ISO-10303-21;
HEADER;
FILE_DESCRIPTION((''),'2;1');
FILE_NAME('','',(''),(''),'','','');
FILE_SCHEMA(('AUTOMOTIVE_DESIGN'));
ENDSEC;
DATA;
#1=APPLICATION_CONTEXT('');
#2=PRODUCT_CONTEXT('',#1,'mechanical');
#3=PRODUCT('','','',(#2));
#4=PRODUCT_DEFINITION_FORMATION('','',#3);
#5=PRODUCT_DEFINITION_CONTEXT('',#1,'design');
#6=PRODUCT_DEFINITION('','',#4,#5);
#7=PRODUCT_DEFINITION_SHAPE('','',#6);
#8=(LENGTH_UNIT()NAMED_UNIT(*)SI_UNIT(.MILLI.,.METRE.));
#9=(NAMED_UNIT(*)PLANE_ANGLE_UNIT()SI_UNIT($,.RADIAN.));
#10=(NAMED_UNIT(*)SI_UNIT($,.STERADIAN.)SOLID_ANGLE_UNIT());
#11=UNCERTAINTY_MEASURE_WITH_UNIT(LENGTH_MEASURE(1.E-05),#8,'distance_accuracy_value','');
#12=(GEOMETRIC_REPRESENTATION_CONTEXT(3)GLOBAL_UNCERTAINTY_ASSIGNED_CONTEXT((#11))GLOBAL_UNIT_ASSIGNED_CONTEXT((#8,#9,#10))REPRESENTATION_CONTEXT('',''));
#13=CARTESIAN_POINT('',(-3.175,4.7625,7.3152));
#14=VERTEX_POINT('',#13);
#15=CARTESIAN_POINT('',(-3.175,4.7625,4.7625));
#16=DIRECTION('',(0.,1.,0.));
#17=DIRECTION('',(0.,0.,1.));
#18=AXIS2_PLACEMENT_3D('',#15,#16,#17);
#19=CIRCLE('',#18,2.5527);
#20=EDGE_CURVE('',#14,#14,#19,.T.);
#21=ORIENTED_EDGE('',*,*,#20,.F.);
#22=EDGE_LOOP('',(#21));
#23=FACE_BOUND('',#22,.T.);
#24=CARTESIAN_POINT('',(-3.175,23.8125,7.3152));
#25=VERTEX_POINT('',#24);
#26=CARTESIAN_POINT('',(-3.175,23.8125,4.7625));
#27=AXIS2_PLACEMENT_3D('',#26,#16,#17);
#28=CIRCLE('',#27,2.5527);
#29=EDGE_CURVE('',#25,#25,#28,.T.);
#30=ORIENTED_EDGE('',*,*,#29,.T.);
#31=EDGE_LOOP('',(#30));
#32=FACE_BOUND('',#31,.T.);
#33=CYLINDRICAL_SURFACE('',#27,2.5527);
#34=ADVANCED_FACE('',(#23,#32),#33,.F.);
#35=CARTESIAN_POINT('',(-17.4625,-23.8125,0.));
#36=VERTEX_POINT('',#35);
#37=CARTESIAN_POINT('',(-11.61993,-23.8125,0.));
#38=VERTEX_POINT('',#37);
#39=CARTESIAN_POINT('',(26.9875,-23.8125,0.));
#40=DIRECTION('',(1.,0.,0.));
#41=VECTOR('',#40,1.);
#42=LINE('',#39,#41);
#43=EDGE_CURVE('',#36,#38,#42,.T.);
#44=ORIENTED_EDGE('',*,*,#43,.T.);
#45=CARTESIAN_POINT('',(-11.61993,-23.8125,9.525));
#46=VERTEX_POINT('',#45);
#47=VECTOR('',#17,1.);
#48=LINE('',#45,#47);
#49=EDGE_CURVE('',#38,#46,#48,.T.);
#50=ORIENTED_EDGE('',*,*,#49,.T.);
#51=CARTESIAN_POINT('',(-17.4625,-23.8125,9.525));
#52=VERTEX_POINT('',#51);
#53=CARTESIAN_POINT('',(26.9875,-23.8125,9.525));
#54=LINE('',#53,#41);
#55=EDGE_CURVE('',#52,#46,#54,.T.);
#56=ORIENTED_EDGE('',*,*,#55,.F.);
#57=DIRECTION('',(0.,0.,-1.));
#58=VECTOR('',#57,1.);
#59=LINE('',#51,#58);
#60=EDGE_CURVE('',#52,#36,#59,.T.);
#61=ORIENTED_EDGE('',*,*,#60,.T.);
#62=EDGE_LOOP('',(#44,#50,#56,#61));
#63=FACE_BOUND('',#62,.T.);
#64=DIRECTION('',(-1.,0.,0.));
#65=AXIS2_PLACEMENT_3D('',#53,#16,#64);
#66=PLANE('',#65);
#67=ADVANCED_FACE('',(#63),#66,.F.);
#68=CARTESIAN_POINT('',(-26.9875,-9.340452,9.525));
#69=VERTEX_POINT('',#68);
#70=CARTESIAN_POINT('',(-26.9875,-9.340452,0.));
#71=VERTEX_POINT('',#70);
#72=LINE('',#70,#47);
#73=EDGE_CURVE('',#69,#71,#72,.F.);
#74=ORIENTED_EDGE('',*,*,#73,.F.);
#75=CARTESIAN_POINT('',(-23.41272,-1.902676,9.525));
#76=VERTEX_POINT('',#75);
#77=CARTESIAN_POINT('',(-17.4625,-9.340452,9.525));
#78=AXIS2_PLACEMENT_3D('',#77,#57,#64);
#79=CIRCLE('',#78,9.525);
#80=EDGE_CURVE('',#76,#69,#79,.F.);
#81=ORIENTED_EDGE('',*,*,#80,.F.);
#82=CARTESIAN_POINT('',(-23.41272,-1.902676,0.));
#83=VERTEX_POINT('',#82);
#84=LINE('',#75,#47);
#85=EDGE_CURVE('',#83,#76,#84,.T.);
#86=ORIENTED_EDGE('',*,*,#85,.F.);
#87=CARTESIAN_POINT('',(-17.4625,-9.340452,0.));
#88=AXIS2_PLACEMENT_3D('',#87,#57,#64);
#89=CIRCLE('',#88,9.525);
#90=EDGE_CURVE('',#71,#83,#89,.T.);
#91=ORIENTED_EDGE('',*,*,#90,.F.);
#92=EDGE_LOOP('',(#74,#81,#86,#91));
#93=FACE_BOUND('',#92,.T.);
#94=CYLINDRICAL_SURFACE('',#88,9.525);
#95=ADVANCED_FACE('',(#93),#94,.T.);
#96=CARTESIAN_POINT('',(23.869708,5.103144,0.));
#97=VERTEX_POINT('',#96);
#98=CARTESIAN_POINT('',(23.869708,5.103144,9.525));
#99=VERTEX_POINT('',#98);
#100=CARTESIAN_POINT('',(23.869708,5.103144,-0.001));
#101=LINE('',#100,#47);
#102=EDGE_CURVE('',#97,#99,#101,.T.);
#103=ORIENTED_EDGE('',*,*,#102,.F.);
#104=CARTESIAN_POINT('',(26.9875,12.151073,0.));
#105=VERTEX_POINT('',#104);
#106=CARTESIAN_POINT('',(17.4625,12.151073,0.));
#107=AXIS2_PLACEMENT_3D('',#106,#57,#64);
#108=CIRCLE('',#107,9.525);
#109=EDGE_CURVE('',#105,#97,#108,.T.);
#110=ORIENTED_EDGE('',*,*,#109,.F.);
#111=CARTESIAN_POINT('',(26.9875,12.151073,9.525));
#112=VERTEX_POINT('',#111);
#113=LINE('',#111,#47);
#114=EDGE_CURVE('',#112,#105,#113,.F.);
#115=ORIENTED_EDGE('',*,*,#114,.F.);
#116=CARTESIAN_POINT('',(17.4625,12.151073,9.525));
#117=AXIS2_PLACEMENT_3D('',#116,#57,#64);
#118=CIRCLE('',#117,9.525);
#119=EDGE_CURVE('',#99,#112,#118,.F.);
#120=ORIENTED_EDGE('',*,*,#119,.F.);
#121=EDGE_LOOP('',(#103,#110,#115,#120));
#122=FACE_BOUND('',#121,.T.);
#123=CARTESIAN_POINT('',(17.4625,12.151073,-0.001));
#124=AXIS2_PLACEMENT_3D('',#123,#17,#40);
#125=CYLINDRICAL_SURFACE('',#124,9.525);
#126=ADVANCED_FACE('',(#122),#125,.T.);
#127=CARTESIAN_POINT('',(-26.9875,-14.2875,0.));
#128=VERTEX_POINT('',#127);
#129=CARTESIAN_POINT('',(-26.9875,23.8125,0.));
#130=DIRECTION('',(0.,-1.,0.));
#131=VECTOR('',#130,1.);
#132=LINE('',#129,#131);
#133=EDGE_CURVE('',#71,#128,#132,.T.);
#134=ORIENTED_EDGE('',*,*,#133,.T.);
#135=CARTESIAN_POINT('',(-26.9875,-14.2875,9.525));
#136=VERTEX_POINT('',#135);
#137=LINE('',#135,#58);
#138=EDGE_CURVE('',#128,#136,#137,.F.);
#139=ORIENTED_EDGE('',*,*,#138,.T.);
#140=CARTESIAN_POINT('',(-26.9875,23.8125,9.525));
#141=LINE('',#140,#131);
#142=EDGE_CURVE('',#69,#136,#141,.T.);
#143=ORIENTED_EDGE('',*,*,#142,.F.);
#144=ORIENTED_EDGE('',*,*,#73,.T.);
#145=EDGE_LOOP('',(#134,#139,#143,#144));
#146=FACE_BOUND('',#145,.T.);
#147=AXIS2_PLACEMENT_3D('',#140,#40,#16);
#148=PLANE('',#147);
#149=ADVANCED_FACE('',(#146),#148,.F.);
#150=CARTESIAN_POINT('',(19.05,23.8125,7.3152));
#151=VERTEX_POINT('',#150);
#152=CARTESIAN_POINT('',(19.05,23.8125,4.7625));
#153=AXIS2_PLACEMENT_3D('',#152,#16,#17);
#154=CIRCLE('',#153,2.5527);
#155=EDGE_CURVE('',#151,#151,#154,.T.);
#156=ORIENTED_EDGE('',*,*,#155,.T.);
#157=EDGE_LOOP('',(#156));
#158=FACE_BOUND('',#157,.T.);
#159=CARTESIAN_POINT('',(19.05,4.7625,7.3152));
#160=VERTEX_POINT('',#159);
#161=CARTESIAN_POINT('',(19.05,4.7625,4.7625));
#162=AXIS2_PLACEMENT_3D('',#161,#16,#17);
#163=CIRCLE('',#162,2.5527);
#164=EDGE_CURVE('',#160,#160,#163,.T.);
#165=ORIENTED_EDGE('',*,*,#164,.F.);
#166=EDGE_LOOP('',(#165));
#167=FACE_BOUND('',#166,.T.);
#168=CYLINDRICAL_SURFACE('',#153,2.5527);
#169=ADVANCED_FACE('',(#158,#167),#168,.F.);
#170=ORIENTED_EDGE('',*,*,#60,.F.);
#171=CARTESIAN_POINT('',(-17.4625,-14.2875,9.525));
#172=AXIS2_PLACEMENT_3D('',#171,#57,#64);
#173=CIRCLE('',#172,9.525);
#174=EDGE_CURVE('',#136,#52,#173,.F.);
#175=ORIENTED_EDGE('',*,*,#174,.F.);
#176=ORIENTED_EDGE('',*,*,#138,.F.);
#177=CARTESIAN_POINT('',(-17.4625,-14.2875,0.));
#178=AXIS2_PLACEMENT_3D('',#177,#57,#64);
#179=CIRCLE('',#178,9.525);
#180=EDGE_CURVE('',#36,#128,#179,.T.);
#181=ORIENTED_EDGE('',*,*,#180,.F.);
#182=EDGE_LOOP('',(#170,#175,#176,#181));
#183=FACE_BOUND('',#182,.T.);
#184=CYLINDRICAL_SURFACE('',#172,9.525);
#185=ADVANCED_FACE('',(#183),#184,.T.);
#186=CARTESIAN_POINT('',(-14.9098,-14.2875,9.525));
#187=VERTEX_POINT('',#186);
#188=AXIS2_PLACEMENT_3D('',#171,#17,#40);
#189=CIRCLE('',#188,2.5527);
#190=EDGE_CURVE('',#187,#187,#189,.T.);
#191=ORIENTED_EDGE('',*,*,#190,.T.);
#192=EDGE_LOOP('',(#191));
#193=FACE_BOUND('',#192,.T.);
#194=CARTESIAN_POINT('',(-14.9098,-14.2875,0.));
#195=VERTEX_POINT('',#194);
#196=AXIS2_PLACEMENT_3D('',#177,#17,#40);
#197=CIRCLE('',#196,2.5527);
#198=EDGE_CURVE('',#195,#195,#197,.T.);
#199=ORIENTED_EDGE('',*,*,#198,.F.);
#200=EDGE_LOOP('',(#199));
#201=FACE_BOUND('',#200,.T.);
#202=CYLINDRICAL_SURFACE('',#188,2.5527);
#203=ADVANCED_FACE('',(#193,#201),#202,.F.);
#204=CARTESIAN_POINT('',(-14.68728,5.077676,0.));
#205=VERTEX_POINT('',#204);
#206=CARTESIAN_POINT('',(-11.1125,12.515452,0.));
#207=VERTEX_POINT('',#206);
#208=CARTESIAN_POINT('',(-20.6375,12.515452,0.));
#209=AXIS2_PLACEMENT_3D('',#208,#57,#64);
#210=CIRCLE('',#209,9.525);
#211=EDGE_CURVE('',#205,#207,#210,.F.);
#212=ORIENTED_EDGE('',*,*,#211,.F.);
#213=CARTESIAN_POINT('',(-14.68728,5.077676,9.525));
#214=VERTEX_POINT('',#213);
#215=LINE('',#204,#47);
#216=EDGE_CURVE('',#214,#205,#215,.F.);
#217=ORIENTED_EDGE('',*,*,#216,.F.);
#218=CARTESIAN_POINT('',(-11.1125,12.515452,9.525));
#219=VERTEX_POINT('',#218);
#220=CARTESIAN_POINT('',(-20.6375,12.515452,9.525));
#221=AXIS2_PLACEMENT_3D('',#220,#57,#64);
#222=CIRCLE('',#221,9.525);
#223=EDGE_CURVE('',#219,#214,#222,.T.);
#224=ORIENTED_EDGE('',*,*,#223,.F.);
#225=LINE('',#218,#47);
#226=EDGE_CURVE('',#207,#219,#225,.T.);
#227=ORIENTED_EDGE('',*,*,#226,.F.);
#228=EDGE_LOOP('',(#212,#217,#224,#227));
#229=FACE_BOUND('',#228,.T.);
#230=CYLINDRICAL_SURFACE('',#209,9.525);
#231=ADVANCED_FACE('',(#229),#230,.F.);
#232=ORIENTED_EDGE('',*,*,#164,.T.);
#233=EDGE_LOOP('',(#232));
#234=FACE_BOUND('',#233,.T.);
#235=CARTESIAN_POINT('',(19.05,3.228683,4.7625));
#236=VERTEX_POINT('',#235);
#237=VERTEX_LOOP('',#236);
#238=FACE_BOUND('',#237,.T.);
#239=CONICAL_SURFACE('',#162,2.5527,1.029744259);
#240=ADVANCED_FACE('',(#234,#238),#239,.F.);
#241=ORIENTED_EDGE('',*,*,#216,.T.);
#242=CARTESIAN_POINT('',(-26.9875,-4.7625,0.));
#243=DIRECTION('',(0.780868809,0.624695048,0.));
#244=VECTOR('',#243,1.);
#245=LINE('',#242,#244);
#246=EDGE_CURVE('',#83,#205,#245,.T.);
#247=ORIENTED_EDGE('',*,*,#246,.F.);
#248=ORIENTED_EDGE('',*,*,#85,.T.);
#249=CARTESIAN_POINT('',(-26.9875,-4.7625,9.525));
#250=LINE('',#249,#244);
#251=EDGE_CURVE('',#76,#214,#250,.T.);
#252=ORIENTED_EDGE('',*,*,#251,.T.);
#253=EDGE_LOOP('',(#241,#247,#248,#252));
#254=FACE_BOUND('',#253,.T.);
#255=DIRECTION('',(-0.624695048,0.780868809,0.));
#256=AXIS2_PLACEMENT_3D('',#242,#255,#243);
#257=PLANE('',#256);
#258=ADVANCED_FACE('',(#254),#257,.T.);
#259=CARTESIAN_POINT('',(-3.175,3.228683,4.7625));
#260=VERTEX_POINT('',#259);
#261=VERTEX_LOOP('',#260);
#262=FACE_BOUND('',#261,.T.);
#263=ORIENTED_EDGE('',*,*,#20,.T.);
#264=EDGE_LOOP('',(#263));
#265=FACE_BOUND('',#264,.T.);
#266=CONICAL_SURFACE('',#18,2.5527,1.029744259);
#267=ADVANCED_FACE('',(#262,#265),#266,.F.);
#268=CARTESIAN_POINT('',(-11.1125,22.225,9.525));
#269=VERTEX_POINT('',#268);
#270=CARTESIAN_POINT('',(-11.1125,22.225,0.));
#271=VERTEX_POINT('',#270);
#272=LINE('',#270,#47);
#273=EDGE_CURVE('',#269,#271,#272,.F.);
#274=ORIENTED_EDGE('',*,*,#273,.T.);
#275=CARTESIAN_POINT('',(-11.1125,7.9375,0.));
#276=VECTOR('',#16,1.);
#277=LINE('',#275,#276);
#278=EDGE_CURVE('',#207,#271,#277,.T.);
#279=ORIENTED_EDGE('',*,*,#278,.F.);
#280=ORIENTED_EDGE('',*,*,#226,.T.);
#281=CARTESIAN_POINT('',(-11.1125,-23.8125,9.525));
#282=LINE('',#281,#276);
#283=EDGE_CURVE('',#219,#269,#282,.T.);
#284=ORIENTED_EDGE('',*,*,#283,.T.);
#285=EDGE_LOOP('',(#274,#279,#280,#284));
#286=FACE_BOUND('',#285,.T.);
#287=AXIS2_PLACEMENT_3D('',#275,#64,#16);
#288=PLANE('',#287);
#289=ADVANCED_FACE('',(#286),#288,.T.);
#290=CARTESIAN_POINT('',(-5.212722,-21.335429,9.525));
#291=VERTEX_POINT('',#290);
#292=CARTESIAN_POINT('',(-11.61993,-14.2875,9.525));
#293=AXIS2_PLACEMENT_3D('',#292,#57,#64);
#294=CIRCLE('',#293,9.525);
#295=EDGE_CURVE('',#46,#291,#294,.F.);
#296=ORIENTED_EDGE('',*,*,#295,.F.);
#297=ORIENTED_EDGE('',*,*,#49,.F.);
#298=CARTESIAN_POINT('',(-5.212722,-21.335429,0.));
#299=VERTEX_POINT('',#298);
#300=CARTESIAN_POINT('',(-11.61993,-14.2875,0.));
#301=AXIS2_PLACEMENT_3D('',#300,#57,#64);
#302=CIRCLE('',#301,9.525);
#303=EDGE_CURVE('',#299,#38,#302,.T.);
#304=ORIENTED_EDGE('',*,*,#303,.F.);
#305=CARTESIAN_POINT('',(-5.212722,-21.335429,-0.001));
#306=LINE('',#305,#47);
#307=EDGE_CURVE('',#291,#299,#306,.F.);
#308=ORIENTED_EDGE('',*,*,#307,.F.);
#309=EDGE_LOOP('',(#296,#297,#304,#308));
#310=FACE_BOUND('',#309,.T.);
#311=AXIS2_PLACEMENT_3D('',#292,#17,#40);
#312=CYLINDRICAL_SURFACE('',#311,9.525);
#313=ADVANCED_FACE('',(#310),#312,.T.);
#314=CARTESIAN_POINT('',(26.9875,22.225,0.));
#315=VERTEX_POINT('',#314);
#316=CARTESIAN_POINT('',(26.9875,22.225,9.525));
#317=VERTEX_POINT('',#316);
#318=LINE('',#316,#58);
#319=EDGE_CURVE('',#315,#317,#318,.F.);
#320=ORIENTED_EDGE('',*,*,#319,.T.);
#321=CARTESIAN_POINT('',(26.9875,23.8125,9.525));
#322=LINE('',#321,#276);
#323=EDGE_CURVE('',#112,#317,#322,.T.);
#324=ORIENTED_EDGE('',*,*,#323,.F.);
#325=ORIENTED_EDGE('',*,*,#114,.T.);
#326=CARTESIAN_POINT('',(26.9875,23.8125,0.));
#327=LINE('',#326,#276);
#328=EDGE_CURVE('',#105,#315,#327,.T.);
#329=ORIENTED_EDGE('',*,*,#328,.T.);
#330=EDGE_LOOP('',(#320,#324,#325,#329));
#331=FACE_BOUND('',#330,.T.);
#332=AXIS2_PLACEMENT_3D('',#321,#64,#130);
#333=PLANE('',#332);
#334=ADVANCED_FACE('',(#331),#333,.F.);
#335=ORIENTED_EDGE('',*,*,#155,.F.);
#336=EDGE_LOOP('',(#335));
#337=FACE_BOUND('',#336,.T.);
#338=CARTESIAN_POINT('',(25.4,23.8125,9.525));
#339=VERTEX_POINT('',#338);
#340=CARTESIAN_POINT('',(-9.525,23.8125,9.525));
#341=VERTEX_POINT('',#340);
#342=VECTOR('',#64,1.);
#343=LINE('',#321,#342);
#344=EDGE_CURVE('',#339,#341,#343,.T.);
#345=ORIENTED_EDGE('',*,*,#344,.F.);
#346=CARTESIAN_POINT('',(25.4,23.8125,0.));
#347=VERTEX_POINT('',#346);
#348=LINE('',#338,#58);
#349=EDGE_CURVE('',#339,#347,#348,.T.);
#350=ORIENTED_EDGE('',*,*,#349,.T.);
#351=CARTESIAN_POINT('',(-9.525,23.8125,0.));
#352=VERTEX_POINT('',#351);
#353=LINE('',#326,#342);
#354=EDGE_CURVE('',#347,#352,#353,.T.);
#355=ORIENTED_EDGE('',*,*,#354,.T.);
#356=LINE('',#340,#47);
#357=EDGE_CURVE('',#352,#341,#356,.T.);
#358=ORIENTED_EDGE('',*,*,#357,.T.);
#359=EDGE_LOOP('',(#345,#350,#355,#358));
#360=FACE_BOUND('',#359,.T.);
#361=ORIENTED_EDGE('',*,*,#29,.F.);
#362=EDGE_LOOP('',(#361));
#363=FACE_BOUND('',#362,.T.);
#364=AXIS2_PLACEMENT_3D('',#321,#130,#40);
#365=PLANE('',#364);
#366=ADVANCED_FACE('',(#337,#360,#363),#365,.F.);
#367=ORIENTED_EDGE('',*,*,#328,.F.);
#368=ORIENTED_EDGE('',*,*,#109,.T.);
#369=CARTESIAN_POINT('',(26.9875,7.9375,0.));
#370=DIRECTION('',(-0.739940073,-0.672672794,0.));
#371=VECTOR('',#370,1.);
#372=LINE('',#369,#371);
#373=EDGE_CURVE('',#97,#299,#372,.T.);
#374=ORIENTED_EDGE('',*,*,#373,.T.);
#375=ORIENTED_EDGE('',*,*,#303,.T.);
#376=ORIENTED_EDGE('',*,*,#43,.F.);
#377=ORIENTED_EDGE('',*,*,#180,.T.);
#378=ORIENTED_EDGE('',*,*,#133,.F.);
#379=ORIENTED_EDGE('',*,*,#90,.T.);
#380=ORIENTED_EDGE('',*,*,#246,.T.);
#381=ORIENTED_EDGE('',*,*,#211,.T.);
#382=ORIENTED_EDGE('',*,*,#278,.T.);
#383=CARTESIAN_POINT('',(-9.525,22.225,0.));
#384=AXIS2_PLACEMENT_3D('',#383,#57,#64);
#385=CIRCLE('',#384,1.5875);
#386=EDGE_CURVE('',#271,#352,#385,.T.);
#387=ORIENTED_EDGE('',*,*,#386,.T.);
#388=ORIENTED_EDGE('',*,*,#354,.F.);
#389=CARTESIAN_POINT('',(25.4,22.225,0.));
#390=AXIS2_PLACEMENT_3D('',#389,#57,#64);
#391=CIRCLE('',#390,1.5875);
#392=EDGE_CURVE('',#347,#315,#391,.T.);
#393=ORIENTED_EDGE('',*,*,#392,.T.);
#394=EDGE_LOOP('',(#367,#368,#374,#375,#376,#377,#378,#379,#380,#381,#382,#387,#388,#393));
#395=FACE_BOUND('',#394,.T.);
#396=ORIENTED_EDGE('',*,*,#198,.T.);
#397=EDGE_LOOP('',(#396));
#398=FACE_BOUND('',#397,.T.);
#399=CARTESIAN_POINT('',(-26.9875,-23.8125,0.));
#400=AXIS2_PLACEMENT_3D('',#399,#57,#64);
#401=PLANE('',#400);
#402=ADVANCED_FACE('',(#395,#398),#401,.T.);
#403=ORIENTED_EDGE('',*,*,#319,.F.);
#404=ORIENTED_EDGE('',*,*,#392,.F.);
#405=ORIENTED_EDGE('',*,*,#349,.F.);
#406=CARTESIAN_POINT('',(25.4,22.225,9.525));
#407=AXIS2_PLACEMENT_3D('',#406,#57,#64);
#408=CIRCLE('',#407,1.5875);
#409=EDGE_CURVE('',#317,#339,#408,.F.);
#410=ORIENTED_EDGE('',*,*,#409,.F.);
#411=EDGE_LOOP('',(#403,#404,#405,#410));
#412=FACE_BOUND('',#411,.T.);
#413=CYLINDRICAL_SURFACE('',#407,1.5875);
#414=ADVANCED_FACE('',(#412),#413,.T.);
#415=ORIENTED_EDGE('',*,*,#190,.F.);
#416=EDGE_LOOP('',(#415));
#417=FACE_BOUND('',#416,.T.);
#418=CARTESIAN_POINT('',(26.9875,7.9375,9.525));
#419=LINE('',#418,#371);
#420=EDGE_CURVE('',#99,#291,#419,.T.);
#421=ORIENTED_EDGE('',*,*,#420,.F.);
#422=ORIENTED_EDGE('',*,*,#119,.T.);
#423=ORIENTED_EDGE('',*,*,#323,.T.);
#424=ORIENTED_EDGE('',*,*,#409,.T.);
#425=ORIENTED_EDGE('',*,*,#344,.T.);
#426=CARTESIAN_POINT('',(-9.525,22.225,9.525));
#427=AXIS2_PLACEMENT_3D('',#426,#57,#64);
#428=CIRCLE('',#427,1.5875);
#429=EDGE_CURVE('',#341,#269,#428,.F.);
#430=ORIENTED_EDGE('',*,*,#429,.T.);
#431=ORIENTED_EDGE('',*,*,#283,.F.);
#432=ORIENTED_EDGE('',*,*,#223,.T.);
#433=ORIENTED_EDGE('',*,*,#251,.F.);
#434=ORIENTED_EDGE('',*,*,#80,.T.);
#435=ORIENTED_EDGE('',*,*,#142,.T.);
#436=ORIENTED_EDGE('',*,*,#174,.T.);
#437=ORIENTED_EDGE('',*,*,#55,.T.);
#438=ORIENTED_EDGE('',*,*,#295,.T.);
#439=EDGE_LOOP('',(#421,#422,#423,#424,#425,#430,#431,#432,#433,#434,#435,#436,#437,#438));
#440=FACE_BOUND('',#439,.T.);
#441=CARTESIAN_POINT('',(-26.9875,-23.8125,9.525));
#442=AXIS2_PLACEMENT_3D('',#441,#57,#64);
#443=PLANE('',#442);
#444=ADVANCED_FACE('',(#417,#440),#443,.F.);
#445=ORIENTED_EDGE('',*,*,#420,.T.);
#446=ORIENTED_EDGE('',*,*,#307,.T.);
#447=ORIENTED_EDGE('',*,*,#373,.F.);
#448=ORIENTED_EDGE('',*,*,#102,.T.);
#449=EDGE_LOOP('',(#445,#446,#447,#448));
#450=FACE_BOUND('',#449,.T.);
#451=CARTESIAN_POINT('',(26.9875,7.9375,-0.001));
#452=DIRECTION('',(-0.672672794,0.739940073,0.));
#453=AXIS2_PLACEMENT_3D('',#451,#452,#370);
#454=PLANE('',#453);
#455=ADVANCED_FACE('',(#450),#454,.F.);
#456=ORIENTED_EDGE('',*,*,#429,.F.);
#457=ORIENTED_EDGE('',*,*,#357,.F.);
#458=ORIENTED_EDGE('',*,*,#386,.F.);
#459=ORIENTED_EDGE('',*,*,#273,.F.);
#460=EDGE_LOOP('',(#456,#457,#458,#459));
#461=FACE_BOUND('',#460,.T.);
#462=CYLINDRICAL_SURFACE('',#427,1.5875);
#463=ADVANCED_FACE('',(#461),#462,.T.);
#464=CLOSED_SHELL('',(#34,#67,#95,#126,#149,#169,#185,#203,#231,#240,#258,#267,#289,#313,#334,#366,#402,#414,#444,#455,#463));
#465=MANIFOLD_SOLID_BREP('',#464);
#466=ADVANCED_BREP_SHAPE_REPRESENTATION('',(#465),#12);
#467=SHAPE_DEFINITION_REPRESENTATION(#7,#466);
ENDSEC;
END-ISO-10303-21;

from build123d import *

# Parameters (mm, degrees)
SKETCH1_W                   = 53.975
SKETCH1_H                   = 47.625
BASE_FLANGE1_DEPTH          = 9.525
F_1_4_20_TAPPED_HOLE1_D     = 5.1054
F_1_4_20_TAPPED_HOLE1_DEPTH = 19.05
F_1_4_20_TAPPED_HOLE1_TIP   = 1.533816902
CUT_EXTRUDE1_DEPTH          = 38.230175094
CUT_EXTRUDE2_REACH          = 39.23
F_1_4_20_TAPPED_HOLE2_D     = 5.1054
F_1_4_20_TAPPED_HOLE2_DEPTH = 9.525
CUT_EXTRUDE3_REACH          = 39.23
FILLET2_R                   = 1.5875
FILLET1_R                   = 9.525


# Sheet-metal steps are written as plain solids
with BuildPart() as part:
    # Sketch1 → Base-Flange1 (new body)
    with BuildSketch(Plane.XY):
        Rectangle(SKETCH1_W, SKETCH1_H)
    extrude(amount=BASE_FLANGE1_DEPTH)

    # 1/4-20 Tapped Hole1
    with Locations(Plane(origin=(0, 23.8125, 0), x_dir=(1, 0, 0), z_dir=(0, 1, 0))):
        with Locations((-3.175, -4.7625), (19.05, -4.7625)):
            Hole(F_1_4_20_TAPPED_HOLE1_D / 2, depth=F_1_4_20_TAPPED_HOLE1_DEPTH)
            with Locations((0, 0, -(F_1_4_20_TAPPED_HOLE1_DEPTH + F_1_4_20_TAPPED_HOLE1_TIP / 2))):  # 118° drill point
                Cone(0, F_1_4_20_TAPPED_HOLE1_D / 2, F_1_4_20_TAPPED_HOLE1_TIP, mode=Mode.SUBTRACT)

    # Sketch4 → Cut-Extrude1 (cut, through all)
    with BuildSketch(Plane(origin=(0, 0, 0), x_dir=(-1, 0, 0), z_dir=(0, 0, -1))):
        with BuildLine():
            Line((17.5895, -14.224), (17.5895, -14.351))
            ThreePointArc((17.5895, -14.351), (17.4625, -14.478), (17.3355, -14.351))
            Line((17.3355, -14.351), (17.3355, -14.224))
            ThreePointArc((17.3355, -14.224), (17.4625, -14.097), (17.5895, -14.224))
        make_face()
    extrude(amount=-CUT_EXTRUDE1_DEPTH, mode=Mode.SUBTRACT)

    # Sketch5 → Cut-Extrude2 (cut, up to next)
    with BuildSketch(Plane.XY.offset(9.525), mode=Mode.PRIVATE) as cut_extrude2_sk1:
        Polygon((26.9875, -23.8125), (26.9875, 7.9375), (-7.9375, -23.8125), align=None)
    cut_extrude2_tool1 = extrude(cut_extrude2_sk1.sketch, amount=-CUT_EXTRUDE2_REACH, mode=Mode.PRIVATE) & part.part
    add(cut_extrude2_tool1.solids().sort_by_distance((15.345833, -13.229167, 9.525))[0], mode=Mode.SUBTRACT)

    # 1/4-20 Tapped Hole2
    with Locations(Plane.XY.offset(9.525)):
        with Locations((-17.4625, -14.2875)):
            Hole(F_1_4_20_TAPPED_HOLE2_D / 2, depth=F_1_4_20_TAPPED_HOLE2_DEPTH)

    # Sketch8 → Cut-Extrude3 (cut, up to next)
    with BuildSketch(Plane.XY.offset(9.525), mode=Mode.PRIVATE) as cut_extrude3_sk1:
        Polygon((-26.9875, -4.7625), (-11.1125, 7.9375), (-11.1125, 23.8125), (-26.9875, 23.8125), align=None)
    cut_extrude3_tool1 = extrude(cut_extrude3_sk1.sketch, amount=-CUT_EXTRUDE3_REACH, mode=Mode.PRIVATE) & part.part
    add(cut_extrude3_tool1.solids().sort_by_distance((-19.805952, 12.397619, 9.525))[0], mode=Mode.SUBTRACT)

    # Fillet2
    fillet2_edges = [part.edges().sort_by_distance(p)[0] for p in [
        (-11.1125, 23.8125, 4.7625),
        (26.9875, 23.8125, 4.7625),
    ]]
    fillet(fillet2_edges, radius=FILLET2_R)

    # Fillet1
    fillet1_edges = [part.edges().sort_by_distance(p)[0] for p in [
        (-7.9375, -23.8125, 4.7625),
        (26.9875, 7.9375, 4.7625),
        (-11.1125, 7.9375, 4.7625),
        (-26.9875, -4.7625, 4.7625),
        (-26.9875, -23.8125, 4.7625),
    ]]
    fillet(fillet1_edges, radius=FILLET1_R)


solid = part.part
